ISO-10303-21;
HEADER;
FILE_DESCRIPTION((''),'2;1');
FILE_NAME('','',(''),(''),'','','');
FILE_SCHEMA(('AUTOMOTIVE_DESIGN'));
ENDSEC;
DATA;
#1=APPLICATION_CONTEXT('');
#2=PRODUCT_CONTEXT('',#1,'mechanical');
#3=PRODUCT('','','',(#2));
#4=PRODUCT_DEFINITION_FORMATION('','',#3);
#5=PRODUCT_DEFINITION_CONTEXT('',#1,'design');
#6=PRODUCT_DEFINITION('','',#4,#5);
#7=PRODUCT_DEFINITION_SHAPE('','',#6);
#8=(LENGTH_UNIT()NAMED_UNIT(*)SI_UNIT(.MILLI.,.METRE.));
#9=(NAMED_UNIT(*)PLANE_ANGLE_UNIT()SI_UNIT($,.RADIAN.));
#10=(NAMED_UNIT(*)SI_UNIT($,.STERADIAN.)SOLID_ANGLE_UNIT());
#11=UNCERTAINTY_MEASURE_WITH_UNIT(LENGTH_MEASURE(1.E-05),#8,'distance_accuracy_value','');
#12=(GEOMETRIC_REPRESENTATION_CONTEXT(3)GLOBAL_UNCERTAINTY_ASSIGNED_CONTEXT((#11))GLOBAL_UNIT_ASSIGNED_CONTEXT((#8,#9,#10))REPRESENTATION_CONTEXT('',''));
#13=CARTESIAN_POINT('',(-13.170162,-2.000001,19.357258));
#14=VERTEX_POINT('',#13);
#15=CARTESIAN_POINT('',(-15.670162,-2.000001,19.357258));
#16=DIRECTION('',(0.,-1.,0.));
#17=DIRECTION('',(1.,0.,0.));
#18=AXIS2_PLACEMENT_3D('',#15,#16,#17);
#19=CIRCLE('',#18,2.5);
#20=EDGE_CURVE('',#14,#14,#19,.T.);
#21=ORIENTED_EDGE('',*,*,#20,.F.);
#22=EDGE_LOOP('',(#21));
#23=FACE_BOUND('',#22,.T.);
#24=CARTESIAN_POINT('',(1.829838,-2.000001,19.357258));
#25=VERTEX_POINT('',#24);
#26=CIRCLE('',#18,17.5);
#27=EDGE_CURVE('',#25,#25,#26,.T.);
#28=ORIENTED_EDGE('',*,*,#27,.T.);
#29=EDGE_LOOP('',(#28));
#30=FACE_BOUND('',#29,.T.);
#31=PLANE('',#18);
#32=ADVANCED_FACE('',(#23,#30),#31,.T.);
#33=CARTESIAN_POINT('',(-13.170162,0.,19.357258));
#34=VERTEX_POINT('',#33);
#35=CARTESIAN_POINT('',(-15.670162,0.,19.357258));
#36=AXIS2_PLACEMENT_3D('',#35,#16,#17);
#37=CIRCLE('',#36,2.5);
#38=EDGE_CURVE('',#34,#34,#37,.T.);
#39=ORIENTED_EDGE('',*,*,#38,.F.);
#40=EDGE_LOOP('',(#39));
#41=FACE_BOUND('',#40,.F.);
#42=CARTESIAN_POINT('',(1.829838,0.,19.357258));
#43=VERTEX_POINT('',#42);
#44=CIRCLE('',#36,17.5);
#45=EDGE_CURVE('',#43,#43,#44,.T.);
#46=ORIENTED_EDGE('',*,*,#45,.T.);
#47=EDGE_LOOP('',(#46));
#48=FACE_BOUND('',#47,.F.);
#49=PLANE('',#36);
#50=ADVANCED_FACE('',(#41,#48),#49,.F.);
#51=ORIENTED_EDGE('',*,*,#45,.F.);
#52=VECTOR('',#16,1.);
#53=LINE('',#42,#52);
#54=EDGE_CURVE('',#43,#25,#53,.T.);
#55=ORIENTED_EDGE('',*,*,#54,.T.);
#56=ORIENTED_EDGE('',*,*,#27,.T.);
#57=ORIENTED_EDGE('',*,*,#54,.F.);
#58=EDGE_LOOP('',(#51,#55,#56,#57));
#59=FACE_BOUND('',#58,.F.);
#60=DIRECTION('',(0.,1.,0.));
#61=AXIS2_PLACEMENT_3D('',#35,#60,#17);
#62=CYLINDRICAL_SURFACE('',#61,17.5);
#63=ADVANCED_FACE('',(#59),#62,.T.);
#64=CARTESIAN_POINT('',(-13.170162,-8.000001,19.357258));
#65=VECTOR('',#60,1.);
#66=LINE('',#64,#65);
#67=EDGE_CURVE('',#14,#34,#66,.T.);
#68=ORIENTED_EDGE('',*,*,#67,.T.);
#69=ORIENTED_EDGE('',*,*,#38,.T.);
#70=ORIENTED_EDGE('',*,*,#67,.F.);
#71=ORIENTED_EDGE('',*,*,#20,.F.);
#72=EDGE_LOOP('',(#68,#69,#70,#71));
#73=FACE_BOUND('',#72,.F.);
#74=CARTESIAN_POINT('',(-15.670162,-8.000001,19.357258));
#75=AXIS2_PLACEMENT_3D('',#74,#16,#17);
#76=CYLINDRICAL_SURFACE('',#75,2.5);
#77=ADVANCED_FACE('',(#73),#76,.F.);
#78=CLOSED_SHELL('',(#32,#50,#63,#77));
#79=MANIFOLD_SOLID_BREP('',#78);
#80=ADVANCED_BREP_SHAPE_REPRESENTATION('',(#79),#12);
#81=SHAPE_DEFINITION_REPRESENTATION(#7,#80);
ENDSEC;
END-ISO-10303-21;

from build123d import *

# Parameters (mm, degrees)
F0_R     = 17.5
F1_DEPTH = 2.00000108
F2_R     = 2.5
F3_DEPTH = 6
F6_DEPTH = 8.00100108


# Not quite as in the source:
# - a feature of the source that left no trace in its solid (it failed there, or was rolled back) is left out


with BuildPart() as f1:
    # F0 (on Front) → F1 (new body)
    with BuildSketch(Plane.XZ):
        with Locations((-15.6701616943, 19.357258454)):
            Circle(F0_R)
    extrude(amount=F1_DEPTH)

    # F2 (on face) → F3 (join)
    with BuildSketch(Plane.XZ.offset(2.00000108)):
        with Locations((-15.6701616943, 19.357258454)):
            Circle(F2_R)
    extrude(amount=F3_DEPTH)

    # F6 (cut, through all): a face of the model
    f6_faces = [f1.faces().sort_by_distance(p)[0] for p in [
        (-15.6701616943, -8.00000108, 19.357258454),
    ]]
    extrude(f6_faces, amount=-F6_DEPTH, mode=Mode.SUBTRACT)


solid = f1.part
